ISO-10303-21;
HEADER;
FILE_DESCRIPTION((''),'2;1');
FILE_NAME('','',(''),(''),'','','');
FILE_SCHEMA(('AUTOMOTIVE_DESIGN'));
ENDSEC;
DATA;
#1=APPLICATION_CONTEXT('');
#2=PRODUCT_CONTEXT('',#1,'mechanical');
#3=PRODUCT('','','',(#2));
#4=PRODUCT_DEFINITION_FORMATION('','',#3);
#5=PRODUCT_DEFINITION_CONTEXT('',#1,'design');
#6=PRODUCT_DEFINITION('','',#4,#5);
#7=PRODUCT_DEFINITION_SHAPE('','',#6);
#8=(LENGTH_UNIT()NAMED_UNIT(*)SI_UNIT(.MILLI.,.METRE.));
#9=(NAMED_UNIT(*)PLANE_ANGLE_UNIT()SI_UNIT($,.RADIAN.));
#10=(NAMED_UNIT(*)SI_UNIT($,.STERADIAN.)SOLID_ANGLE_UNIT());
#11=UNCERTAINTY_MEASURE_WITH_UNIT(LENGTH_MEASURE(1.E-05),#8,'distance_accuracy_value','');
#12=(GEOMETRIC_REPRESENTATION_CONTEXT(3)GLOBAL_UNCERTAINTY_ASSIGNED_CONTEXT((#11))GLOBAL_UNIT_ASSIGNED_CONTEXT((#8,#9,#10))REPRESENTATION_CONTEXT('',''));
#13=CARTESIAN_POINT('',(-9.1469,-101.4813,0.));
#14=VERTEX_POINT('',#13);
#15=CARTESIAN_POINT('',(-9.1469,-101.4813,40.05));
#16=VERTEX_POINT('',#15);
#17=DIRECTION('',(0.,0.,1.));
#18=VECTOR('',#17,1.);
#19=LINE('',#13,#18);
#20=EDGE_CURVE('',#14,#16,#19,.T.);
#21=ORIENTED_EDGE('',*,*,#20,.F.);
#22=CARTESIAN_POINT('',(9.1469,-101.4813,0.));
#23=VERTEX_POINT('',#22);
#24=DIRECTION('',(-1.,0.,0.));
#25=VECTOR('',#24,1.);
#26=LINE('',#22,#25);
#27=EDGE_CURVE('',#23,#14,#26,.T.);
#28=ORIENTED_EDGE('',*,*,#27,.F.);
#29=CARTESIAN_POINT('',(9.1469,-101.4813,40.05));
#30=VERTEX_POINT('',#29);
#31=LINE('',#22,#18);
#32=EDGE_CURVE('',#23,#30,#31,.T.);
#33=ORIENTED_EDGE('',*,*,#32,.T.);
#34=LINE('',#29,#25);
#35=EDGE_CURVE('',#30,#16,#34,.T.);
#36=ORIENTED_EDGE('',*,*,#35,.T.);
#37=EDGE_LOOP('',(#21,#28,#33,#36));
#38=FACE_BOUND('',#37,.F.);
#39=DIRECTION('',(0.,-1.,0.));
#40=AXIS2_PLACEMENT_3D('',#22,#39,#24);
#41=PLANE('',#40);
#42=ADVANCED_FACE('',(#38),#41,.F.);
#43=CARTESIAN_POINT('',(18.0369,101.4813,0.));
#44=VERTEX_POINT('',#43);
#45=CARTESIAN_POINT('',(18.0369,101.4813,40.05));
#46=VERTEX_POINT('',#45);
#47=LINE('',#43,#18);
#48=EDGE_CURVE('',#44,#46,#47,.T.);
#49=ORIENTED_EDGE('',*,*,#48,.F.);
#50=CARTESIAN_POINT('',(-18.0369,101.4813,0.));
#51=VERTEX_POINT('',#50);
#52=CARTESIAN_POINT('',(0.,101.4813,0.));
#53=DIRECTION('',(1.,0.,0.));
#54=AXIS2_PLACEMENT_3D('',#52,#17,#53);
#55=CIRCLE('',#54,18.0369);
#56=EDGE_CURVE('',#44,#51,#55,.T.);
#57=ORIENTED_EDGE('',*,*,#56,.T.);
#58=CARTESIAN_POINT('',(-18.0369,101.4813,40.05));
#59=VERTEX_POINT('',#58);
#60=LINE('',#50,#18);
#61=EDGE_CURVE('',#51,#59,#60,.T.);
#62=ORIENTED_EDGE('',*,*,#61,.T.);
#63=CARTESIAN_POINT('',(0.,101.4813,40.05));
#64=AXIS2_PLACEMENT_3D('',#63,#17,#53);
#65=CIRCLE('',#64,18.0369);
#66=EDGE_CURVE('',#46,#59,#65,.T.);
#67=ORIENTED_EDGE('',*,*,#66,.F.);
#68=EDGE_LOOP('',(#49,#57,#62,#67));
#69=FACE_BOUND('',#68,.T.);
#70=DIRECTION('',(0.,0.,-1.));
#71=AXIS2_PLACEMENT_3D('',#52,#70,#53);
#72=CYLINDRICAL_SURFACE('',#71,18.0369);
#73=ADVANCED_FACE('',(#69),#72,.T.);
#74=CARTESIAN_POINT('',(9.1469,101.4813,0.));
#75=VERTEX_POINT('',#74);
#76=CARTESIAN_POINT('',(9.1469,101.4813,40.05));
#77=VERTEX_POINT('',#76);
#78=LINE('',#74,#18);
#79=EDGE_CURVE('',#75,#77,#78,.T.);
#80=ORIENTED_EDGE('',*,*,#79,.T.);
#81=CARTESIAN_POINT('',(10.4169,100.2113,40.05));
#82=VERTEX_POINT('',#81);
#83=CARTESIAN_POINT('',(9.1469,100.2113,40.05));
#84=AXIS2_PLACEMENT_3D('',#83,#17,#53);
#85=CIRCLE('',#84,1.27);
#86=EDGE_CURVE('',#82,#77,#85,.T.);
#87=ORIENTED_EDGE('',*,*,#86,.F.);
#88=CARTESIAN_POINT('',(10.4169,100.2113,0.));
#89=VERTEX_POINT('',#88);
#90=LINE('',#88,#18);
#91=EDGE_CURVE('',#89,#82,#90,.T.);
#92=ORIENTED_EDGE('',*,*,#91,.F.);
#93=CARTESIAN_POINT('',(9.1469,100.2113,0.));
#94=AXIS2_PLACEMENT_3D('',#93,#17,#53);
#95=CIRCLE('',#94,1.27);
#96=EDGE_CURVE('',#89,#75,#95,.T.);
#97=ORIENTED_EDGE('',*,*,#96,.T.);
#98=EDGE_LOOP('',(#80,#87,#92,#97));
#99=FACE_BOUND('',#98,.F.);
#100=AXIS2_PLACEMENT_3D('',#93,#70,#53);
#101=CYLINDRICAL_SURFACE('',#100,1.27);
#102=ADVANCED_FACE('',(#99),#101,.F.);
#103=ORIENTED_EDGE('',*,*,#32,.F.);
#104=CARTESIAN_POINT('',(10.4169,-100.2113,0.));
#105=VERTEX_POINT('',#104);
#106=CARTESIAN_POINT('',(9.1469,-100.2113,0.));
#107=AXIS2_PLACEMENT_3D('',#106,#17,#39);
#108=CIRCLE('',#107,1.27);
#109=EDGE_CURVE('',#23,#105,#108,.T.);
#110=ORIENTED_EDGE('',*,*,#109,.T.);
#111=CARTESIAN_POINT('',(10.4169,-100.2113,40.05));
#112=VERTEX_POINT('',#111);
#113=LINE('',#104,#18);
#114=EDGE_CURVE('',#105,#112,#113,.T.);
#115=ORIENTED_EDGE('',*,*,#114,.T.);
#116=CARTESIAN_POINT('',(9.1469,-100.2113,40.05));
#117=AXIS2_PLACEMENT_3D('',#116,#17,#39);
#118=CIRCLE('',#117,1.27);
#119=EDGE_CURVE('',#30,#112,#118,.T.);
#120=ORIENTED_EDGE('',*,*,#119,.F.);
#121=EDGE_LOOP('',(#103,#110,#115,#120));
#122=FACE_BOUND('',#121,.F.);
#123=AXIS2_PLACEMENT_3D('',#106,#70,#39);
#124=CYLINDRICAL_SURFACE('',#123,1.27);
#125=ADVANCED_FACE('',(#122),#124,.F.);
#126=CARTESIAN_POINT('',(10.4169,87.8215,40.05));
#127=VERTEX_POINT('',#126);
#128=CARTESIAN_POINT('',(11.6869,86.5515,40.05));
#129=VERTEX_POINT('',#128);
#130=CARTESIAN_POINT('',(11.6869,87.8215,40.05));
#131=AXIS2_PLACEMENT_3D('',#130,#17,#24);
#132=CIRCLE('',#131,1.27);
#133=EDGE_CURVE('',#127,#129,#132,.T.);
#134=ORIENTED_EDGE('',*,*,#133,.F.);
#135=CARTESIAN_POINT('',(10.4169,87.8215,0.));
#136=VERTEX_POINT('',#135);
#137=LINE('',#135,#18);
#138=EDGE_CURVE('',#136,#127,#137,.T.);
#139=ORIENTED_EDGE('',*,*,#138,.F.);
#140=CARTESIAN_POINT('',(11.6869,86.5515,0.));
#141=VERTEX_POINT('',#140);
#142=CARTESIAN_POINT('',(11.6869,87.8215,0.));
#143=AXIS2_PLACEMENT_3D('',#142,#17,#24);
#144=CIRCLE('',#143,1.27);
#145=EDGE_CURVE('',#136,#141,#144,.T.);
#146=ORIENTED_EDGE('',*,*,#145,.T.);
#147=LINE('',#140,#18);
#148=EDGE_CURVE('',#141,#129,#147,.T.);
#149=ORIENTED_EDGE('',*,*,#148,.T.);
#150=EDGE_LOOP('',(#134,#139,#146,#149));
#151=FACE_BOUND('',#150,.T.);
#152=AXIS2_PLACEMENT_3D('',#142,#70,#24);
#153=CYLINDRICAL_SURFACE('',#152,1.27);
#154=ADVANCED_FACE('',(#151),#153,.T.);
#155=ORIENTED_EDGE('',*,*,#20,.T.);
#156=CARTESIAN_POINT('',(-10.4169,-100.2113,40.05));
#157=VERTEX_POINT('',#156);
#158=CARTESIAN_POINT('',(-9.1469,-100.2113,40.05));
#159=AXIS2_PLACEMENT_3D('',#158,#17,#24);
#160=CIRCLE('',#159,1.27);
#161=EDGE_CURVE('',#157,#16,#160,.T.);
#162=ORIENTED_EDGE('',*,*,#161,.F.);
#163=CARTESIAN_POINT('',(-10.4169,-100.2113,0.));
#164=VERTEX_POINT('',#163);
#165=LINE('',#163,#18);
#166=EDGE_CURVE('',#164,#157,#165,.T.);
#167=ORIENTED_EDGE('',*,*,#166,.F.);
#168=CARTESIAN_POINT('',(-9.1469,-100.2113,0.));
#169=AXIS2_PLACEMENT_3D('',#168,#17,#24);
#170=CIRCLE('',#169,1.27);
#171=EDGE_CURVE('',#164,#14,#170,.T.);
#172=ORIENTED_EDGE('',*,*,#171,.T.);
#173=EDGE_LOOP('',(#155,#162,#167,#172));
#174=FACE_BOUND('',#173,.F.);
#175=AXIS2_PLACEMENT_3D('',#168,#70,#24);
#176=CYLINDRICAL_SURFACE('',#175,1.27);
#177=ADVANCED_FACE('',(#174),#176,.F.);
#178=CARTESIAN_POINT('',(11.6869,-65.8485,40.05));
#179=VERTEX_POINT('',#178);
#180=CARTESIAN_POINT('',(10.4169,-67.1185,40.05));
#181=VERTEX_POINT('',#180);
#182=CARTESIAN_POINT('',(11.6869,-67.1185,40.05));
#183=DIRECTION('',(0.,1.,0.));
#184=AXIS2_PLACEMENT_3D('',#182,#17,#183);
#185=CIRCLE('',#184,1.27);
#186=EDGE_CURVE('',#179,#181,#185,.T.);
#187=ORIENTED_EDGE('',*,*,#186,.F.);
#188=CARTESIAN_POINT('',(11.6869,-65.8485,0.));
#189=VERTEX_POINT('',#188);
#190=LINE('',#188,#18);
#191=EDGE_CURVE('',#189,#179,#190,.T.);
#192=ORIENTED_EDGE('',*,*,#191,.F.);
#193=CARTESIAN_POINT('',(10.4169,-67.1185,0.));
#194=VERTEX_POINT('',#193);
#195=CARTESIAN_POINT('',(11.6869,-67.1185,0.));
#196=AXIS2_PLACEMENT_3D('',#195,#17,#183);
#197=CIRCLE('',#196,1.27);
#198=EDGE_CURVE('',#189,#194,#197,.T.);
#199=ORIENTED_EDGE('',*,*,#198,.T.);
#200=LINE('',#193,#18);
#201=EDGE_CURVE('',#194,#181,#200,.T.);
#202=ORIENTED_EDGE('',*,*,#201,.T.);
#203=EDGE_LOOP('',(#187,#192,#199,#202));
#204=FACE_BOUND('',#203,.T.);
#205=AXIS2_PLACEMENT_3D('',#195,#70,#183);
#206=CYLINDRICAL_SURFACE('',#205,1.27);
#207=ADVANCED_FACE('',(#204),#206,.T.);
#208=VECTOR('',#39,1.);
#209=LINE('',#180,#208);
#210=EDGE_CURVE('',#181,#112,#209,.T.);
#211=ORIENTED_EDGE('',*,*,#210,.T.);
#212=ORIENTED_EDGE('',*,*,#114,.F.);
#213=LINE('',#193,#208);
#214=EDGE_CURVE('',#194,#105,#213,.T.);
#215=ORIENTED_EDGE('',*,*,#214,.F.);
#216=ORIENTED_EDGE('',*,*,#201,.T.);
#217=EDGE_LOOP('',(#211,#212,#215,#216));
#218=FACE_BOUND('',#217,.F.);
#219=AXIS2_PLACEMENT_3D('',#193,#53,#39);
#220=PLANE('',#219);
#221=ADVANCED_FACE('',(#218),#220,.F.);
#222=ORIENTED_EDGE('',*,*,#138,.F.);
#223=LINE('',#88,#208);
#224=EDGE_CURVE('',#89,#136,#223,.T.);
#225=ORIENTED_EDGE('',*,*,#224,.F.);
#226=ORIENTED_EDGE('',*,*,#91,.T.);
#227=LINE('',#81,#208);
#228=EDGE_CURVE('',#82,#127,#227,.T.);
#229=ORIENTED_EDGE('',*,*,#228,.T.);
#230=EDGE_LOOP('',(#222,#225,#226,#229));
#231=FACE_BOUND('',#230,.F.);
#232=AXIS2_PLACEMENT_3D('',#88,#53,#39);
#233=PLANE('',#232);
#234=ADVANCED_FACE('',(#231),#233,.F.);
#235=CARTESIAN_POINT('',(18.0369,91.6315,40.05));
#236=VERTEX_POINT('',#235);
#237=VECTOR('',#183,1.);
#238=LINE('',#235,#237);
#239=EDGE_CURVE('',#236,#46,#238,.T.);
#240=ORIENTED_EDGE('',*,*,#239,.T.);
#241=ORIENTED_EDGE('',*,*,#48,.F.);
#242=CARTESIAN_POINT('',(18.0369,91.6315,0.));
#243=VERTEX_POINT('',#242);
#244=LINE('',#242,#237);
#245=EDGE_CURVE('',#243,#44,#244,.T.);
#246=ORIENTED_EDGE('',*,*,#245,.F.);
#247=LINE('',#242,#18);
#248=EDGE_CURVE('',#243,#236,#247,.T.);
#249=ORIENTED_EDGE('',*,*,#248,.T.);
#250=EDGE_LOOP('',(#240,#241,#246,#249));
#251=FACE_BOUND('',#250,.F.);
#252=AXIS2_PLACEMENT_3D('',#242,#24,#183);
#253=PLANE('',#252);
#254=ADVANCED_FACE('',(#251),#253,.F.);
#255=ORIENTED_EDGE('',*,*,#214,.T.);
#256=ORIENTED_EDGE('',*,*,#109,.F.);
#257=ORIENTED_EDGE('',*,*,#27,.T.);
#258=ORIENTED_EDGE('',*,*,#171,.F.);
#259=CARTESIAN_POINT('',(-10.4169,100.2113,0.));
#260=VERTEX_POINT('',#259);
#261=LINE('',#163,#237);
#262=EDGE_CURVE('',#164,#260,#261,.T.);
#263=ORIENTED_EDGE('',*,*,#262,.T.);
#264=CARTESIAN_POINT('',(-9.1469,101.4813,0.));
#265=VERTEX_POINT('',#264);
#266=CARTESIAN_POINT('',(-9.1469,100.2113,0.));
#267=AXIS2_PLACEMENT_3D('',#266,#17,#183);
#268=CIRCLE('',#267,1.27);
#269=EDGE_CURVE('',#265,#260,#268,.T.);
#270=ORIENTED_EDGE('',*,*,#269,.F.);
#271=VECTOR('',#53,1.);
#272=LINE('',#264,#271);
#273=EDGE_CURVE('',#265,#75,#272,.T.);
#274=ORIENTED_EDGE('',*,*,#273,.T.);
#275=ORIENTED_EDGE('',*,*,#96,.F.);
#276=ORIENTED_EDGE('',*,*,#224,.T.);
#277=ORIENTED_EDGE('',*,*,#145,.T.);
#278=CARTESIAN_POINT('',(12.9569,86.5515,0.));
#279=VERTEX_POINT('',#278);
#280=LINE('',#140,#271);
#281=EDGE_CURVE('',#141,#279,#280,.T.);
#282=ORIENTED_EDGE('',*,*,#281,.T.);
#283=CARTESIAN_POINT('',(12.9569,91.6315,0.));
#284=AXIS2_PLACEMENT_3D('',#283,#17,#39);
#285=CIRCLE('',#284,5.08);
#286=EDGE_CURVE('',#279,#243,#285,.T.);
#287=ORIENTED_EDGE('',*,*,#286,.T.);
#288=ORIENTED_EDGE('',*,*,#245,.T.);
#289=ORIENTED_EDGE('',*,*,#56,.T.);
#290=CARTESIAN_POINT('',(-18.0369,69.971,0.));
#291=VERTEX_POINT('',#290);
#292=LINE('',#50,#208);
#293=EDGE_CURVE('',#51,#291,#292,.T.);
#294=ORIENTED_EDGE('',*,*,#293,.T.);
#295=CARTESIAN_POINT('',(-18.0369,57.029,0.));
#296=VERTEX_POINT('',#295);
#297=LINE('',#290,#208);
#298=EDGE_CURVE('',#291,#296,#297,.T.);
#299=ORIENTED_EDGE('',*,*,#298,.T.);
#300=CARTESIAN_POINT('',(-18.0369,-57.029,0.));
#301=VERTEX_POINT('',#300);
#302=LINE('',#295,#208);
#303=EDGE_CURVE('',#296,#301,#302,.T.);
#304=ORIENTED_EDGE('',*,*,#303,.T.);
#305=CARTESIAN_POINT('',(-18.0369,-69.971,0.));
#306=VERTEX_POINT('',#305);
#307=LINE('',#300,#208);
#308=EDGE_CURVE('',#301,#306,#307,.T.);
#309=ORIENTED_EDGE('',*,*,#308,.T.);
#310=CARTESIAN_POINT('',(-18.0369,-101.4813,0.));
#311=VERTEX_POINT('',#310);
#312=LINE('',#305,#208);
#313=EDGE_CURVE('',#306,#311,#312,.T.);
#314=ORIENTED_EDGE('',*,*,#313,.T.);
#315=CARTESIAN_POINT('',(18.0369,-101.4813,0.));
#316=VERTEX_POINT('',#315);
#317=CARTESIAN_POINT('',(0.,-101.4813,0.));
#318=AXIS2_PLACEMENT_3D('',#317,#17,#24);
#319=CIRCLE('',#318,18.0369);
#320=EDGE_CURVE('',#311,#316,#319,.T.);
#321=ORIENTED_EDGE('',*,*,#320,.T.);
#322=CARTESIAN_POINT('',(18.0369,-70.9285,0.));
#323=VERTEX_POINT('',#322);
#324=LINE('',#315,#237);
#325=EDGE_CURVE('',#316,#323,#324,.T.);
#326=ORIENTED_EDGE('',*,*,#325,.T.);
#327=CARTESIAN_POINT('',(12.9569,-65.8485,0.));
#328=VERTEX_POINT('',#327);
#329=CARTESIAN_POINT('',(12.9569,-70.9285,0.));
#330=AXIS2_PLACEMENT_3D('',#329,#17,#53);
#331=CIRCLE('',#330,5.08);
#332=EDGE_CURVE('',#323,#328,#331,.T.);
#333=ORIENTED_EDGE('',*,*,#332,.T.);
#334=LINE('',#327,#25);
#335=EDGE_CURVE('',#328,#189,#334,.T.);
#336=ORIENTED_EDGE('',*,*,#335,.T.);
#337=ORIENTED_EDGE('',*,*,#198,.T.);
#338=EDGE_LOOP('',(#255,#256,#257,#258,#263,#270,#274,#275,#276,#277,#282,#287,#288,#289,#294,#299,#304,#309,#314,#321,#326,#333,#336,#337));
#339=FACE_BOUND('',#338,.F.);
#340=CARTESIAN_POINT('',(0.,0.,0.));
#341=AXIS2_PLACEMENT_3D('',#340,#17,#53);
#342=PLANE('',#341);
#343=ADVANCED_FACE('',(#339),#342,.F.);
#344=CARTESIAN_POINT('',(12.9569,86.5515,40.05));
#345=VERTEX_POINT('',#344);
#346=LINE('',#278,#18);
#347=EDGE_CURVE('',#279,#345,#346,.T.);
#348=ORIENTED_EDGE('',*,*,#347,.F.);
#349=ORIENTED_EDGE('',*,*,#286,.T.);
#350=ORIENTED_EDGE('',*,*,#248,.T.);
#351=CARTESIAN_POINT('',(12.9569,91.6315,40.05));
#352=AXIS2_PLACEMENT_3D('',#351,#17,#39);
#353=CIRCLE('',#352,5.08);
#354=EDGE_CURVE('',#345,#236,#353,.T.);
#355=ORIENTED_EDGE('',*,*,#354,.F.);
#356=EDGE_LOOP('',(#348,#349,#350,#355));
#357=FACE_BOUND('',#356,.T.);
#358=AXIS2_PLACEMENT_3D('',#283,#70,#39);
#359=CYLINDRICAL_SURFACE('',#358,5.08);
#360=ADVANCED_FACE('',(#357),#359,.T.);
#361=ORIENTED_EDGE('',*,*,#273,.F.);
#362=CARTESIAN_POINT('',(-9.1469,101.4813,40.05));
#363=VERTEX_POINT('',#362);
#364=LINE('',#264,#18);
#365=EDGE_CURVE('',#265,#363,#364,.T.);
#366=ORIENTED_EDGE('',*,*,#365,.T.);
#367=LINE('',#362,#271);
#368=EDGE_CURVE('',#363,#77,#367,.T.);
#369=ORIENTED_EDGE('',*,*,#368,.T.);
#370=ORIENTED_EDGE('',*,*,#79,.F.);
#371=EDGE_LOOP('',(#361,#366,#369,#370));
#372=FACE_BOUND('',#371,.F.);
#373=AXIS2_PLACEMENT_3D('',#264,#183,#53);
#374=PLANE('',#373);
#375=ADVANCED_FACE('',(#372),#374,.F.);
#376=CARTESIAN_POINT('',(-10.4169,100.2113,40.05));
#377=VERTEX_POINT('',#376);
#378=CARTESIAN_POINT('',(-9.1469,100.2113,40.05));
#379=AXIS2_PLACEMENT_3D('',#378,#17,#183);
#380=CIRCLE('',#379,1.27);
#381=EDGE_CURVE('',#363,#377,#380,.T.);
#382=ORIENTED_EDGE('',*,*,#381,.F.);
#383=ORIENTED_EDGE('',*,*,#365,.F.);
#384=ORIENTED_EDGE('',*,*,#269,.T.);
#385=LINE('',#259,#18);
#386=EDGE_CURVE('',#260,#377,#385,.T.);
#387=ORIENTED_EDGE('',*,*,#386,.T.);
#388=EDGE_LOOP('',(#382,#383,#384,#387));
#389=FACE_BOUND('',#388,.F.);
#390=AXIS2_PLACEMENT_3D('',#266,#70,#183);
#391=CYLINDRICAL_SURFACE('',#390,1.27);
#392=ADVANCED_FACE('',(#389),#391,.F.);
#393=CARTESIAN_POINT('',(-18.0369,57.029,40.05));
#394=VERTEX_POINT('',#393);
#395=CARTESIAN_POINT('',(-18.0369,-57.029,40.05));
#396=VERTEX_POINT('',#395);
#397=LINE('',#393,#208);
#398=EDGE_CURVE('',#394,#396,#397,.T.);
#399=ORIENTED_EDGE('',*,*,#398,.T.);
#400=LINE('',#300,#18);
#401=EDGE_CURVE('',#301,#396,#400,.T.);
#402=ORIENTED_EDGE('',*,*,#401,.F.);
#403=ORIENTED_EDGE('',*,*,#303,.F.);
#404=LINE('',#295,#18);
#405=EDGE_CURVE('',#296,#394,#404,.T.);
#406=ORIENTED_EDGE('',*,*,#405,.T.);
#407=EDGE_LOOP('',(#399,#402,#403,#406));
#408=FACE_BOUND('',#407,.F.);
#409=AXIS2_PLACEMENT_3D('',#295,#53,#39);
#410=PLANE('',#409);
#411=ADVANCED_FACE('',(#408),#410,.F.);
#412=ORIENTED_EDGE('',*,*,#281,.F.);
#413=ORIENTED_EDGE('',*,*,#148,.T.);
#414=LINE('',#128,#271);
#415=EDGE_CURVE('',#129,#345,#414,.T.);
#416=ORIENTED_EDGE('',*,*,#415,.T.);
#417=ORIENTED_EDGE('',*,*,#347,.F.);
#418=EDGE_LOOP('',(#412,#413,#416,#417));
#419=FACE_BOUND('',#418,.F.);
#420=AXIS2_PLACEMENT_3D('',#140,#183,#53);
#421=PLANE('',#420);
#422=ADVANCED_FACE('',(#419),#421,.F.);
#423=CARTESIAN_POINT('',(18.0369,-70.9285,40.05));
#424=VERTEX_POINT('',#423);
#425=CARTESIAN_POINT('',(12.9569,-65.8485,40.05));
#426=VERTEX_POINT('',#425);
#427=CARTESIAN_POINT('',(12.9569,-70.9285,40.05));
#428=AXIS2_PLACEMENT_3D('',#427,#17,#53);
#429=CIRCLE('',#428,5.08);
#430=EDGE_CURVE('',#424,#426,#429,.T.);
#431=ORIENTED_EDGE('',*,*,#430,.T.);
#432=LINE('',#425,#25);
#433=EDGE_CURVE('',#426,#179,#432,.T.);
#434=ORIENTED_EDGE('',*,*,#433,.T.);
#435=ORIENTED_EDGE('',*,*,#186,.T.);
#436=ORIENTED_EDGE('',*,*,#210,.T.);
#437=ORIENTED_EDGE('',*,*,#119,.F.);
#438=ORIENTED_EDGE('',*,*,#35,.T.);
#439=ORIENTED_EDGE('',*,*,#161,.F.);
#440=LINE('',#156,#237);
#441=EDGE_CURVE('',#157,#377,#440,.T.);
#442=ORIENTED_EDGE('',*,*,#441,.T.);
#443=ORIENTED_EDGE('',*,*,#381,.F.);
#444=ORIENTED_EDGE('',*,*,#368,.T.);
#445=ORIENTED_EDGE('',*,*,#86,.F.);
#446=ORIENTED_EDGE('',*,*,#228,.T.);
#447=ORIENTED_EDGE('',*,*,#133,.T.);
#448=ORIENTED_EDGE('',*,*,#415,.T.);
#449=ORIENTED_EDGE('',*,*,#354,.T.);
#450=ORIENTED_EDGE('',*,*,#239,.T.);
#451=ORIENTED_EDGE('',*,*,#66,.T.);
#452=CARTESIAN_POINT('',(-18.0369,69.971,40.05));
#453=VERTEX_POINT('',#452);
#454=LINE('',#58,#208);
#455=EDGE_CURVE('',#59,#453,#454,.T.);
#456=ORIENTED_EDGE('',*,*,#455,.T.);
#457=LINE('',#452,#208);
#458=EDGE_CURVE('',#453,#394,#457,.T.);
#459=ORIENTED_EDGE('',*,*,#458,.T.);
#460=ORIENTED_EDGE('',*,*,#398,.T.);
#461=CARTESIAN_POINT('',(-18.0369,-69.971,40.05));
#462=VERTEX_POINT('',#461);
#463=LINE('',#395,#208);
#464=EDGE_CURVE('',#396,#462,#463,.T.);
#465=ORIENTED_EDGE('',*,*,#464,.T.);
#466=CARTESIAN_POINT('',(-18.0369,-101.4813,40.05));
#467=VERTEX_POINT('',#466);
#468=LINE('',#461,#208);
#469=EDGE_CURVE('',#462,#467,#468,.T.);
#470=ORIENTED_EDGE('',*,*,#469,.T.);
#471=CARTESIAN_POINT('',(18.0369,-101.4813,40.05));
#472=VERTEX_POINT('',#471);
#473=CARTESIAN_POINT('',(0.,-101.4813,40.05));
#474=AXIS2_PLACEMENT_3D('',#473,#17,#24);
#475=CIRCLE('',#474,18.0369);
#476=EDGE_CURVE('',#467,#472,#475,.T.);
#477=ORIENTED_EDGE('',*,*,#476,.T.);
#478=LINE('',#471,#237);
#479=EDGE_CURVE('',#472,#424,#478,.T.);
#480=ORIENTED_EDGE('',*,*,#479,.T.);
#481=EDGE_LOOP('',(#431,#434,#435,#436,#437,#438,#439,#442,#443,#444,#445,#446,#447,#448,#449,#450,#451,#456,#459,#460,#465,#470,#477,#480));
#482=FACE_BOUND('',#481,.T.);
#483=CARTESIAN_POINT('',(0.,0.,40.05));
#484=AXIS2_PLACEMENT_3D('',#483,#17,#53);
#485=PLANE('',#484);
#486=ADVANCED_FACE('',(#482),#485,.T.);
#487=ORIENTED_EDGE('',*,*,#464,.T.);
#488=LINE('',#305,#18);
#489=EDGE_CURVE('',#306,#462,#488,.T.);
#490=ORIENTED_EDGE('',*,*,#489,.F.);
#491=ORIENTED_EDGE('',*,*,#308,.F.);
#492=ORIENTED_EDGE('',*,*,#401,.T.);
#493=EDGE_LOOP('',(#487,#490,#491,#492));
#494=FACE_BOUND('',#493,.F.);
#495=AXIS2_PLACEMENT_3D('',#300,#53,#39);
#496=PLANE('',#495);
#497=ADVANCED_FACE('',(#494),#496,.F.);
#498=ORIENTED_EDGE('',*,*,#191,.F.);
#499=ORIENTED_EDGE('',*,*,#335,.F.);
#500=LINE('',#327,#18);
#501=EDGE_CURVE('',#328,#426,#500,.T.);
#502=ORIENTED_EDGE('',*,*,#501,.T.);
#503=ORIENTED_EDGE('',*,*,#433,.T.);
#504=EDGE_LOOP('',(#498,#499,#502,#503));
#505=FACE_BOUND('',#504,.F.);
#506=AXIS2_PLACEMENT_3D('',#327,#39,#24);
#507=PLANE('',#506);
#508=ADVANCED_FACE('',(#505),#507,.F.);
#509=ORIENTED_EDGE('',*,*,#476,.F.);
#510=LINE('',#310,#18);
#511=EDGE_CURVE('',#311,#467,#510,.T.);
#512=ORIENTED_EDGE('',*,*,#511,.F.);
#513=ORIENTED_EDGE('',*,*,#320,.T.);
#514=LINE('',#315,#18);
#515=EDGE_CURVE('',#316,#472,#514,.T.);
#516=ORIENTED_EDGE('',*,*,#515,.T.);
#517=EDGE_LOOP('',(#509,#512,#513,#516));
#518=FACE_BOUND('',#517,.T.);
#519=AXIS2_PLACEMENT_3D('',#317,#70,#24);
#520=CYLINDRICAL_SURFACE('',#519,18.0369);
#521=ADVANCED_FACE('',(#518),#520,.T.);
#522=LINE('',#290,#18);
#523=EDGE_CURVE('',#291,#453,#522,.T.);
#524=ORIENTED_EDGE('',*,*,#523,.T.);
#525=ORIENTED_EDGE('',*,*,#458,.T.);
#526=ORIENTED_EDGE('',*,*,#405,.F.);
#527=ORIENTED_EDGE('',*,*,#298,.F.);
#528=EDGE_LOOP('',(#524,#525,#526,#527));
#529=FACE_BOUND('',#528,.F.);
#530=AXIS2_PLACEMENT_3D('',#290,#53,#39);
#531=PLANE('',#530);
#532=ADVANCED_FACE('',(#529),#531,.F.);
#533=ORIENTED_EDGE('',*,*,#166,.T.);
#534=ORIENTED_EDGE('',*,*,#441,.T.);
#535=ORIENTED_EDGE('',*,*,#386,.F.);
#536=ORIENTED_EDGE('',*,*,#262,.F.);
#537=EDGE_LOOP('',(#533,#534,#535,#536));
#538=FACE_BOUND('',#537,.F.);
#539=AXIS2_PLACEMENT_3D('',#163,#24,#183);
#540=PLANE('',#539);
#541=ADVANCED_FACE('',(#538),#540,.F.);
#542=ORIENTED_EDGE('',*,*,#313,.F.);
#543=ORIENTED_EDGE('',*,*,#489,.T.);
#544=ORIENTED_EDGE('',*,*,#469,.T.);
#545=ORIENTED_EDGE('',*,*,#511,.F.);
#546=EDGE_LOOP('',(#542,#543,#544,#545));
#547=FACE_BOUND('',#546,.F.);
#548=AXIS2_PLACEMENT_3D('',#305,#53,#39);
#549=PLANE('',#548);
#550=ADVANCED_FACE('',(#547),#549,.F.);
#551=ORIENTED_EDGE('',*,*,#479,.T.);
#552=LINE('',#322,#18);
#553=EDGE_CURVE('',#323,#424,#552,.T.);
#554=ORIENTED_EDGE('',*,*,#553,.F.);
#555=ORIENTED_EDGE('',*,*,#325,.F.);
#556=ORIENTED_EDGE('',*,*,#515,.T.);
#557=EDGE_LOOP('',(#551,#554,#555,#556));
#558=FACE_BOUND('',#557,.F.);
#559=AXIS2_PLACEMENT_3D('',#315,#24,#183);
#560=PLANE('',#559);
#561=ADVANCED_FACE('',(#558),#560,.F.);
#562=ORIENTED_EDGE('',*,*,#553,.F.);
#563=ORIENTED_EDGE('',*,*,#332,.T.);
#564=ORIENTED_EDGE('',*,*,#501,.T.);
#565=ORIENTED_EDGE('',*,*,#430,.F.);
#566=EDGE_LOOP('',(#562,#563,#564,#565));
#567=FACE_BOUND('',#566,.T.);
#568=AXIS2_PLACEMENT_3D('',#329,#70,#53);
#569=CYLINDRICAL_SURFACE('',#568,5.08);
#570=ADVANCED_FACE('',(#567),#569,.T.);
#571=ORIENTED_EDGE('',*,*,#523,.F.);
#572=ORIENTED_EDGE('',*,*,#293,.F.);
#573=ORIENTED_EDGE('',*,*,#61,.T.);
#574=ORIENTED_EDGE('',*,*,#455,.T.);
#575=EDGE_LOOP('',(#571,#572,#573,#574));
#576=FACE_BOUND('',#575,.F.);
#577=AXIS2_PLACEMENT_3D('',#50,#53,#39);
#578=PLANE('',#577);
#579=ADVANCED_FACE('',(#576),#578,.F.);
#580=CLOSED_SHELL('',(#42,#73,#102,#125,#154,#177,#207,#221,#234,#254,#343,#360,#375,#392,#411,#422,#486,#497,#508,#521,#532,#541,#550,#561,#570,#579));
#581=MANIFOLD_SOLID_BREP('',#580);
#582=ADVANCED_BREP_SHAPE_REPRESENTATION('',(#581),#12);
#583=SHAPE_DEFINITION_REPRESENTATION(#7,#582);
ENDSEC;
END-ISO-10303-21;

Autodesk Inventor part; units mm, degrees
ref_plane "YZ Plane" through (0, 0, 0) normal (1, 0, 0) x (0, 1, 0)
ref_plane "XZ Plane" through (0, 0, 0) normal (0, 1, 0) x (-1, 0, 0)
ref_plane "XY Plane" through (0, 0, 0) normal (0, 0, 1) x (1, 0, 0)
ref_plane "Work Plane12" through (0, 0, 0) normal (0, 0, 1) x (1, 0, 0)
sketch "Sketch13" plane through (0, 0, 0) normal (0, 0, 1) x (1, 0, 0)
  line L0 (18.0369, 91.6315) -> (18.0369, 101.4813) projected
  arc A0 (12.9569, 86.5515) -> (18.0369, 91.6315) centre (12.9569, 91.6315) ccw projected
  arc A1 (10.4169, 87.8215) -> (11.6869, 86.5515) centre (11.6869, 87.8215) ccw projected
  line L1 (11.6869, 86.5515) -> (12.9569, 86.5515) projected
  line L2 (10.4169, 100.2113) -> (10.4169, 87.8215) projected
  arc A2 (18.0369, 101.4813) -> (-18.0369, 101.4813) centre (0, 101.4813) ccw projected
  arc A3 (10.4169, 100.2113) -> (9.1469, 101.4813) centre (9.1469, 100.2113) ccw projected
  line L3 (-9.1469, 101.4813) -> (9.1469, 101.4813) projected
  arc A4 (-9.1469, 101.4813) -> (-10.4169, 100.2113) centre (-9.1469, 100.2113) ccw projected
  line L4 (-10.4169, -100.2113) -> (-10.4169, 100.2113) projected
  line L5 (-18.0369, 101.4813) -> (-18.0369, 69.971) projected
  line L6 (-18.0369, 57.029) -> (-18.0369, -57.029) projected
  line L7 (-18.0369, -69.971) -> (-18.0369, -101.4813) projected
  arc A5 (-18.0369, -101.4813) -> (18.0369, -101.4813) centre (0, -101.4813) ccw projected
  line L8 (18.0369, -101.4813) -> (18.0369, -70.9285) projected
  arc A6 (18.0369, -70.9285) -> (12.9569, -65.8485) centre (12.9569, -70.9285) ccw projected
  line L9 (12.9569, -65.8485) -> (11.6869, -65.8485) projected
  arc A7 (11.6869, -65.8485) -> (10.4169, -67.1185) centre (11.6869, -67.1185) ccw projected
  line L10 (10.4169, -67.1185) -> (10.4169, -100.2113) projected
  arc A8 (9.1469, -101.4813) -> (10.4169, -100.2113) centre (9.1469, -100.2113) ccw projected
  line L11 (9.1469, -101.4813) -> (-9.1469, -101.4813) projected
  arc A9 (-10.4169, -100.2113) -> (-9.1469, -101.4813) centre (-9.1469, -100.2113) ccw projected
  line L12 (-18.0369, 69.971) -> (-18.0369, 57.029)
  line L13 (-18.0369, -57.029) -> (-18.0369, -69.971)
  line L14 (18.0369, 91.6315) -> (18.0369, -70.9285) construction
  point P0 (0, 0)
ref_plane "Work Plane4" through (-9.1469, 0, 0) normal (0, -1, 0) x (1, 0, 0)
sketch "Loft Sketch" plane through (-9.1469, 0, 0) normal (0, -1, 0) x (1, 0, 0)
  line L0 (27.1839, 65.45) -> (43.979, 160.7)
  line L1 (27.1839, 65.45) -> (27.1839, 40.05)
  point P0 (9.1469, 0)
  point P1 (27.1839, 0)
  point P2 (27.1839, 0)
  point P3 (27.1839, 0)
  dimension "d6" = 170
  dimension "d7" = 95.25
  dimension "d65" = 25.4
  dimension "d68" = 160.7
extrude "Extrusion6" add sketch "Sketch13" along normal up to surface (40.05 mm away)
sketch "Lower" plane through (0, 101.4813, 40.05) normal (0, 0, 1) x (1, 0, 0)
  line L0 (10.4169, -13.6598) -> (10.4169, -1.27) projected
  arc A0 (10.4169, -13.6598) -> (11.6869, -14.9298) centre (11.6869, -13.6598) ccw projected
  line L1 (12.9569, -14.9298) -> (11.6869, -14.9298) projected
  arc A1 (12.9569, -14.9298) -> (18.0369, -9.8498) centre (12.9569, -9.8498) ccw projected
  line L2 (18.0369, 0) -> (18.0369, -9.8498) projected
  arc A2 (18.0369, 0) -> (-18.0369, 0) centre (0, 0) ccw projected
  line L3 (-18.0369, -202.9627) -> (-18.0369, 0) projected
  arc A3 (-18.0369, -202.9627) -> (18.0369, -202.9627) centre (0, -202.9627) ccw projected
  line L4 (18.0369, -172.4098) -> (18.0369, -202.9627) projected
  arc A4 (18.0369, -172.4098) -> (12.9569, -167.3298) centre (12.9569, -172.4098) ccw projected
  line L5 (11.6869, -167.3298) -> (12.9569, -167.3298) projected
  arc A5 (11.6869, -167.3298) -> (10.4169, -168.5998) centre (11.6869, -168.5998) ccw projected
  line L6 (10.4169, -201.6927) -> (10.4169, -168.5998) projected
  arc A6 (9.1469, -202.9627) -> (10.4169, -201.6927) centre (9.1469, -201.6927) ccw projected
  line L7 (-9.1469, -202.9627) -> (9.1469, -202.9627) projected
  arc A7 (-10.4169, -201.6927) -> (-9.1469, -202.9627) centre (-9.1469, -201.6927) ccw projected
  line L8 (-10.4169, -1.27) -> (-10.4169, -201.6927) projected
  arc A8 (-9.1469, 0) -> (-10.4169, -1.27) centre (-9.1469, -1.27) ccw projected
  line L9 (9.1469, 0) -> (-9.1469, 0) projected
  arc A9 (10.4169, -1.27) -> (9.1469, 0) centre (9.1469, -1.27) ccw projected
  point P0 (0, -101.4813)
ref_plane "Mid Lof Plane" through (18.0369, 0, 65.45) normal (0, 0, 1) x (1, 0, 0)
sketch "Mid" plane through (18.0369, 0, 65.45) normal (0, 0, 1) x (1, 0, 0)
  line L0 (-7.62, 87.8215) -> (-7.62, 100.2113) projected
  arc A0 (-7.62, 87.8215) -> (-6.35, 86.5515) centre (-6.35, 87.8215) ccw projected
  line L1 (-5.08, 86.5515) -> (-6.35, 86.5515) projected
  arc A1 (-5.08, 86.5515) -> (0, 91.6315) centre (-5.08, 91.6315) ccw projected
  line L2 (0, 101.4813) -> (0, 91.6315) projected
  arc A2 (0, 101.4813) -> (-36.0739, 101.4813) centre (-18.0369, 101.4813) ccw projected
  line L3 (-36.0739, -101.4813) -> (-36.0739, 101.4813) projected
  arc A3 (-36.0739, -101.4813) -> (0, -101.4813) centre (-18.0369, -101.4813) ccw projected
  line L4 (0, -70.9285) -> (0, -101.4813) projected
  arc A4 (0, -70.9285) -> (-5.08, -65.8485) centre (-5.08, -70.9285) ccw projected
  line L5 (-6.35, -65.8485) -> (-5.08, -65.8485) projected
  arc A5 (-6.35, -65.8485) -> (-7.62, -67.1185) centre (-6.35, -67.1185) ccw projected
  line L6 (-7.62, -100.2113) -> (-7.62, -67.1185) projected
  arc A6 (-8.89, -101.4813) -> (-7.62, -100.2113) centre (-8.89, -100.2113) ccw projected
  line L7 (-27.1839, -101.4813) -> (-8.89, -101.4813) projected
  arc A7 (-28.4539, -100.2113) -> (-27.1839, -101.4813) centre (-27.1839, -100.2113) ccw projected
  line L8 (-28.4539, 100.2113) -> (-28.4539, -100.2113) projected
  arc A8 (-27.1839, 101.4813) -> (-28.4539, 100.2113) centre (-27.1839, 100.2113) ccw projected
  line L9 (-8.89, 101.4813) -> (-27.1839, 101.4813) projected
  arc A9 (-7.62, 100.2113) -> (-8.89, 101.4813) centre (-8.89, 100.2113) ccw projected
  point P0 (-18.0369, 0)
ref_plane "Work Plane5" through (34.8321, 0, 160.7) normal (0, 0, 1) x (1, 0, 0)
ref_plane "Work Plane7" through (0, 0, 0) normal (0, 0, 1) x (1, 0, 0)
sketch "Sketch6" plane through (34.8321, 0, 160.7) normal (0, 0, 1) x (1, 0, 0)
  line L0 (0, 92.3062) -> (0, 91.6315)
  line L1 (-62.0442, 92.3062) -> (-62.0442, 0)
  line L2 (-69.6642, 0) -> (-69.6642, 92.3062)
  line L3 (0, 91.6315) -> (0, 0) construction
  line L4 (-52.869, 0) -> (-45.249, 0) construction
  arc A0 (-34.8321, 119.5183) -> (-62.0442, 92.3062) centre (-34.8321, 92.3062) ccw
  arc A1 (-7.62, 92.3062) -> (-34.8321, 119.5183) centre (-34.8321, 92.3062) ccw
  line L5 (-7.62, 92.3062) -> (-7.62, 89.0915)
  arc A2 (-7.62, 89.0915) -> (-5.08, 86.5515) centre (-5.08, 89.0915) ccw
  line L6 (-5.08, 86.5515) -> (-5.08, 86.5515)
  arc A3 (-5.08, 86.5515) -> (0, 91.6315) centre (-5.08, 91.6315) ccw
  line L7 (-7.62, 90.6989) -> (0, 90.6989) construction
  line L8 (-69.6642, 0) -> (-62.0442, 0) construction
  arc A4 (0, 92.3062) -> (-69.6642, 92.3062) centre (-34.8321, 92.3062) ccw
  line L9 (0, 0) -> (-69.6642, 0) construction
  line L10 (0, -92.3062) -> (0, -70.9285)
  line L11 (-62.0442, -92.3062) -> (-62.0442, 0)
  line L12 (-69.6642, 0) -> (-69.6642, -92.3062)
  arc A5 (-62.0442, -92.3062) -> (-34.8321, -119.5183) centre (-34.8321, -92.3062) ccw
  arc A6 (-34.8321, -119.5183) -> (-7.62, -92.3062) centre (-34.8321, -92.3062) ccw
  line L13 (-7.62, -92.3062) -> (-7.62, -68.3885)
  arc A7 (-5.08, -65.8485) -> (-7.62, -68.3885) centre (-5.08, -68.3885) ccw
  line L14 (-5.08, -65.8485) -> (-5.08, -65.8485)
  arc A8 (0, -70.9285) -> (-5.08, -65.8485) centre (-5.08, -70.9285) ccw
  arc A9 (-69.6642, -92.3062) -> (0, -92.3062) centre (-34.8321, -92.3062) ccw
  arc A10 (-57.314, -56.6624) -> (-59.219, -57.7622) centre (-57.949, -57.7622) ccw construction
  line L15 (-59.219, -57.7622) -> (-59.219, -69.2378) construction
  arc A11 (-59.219, -69.2378) -> (-57.314, -70.3376) centre (-57.949, -69.2378) ccw construction
  line L16 (-57.314, -70.3376) -> (-54.774, -68.8712) construction
  arc A12 (-52.869, -69.971) -> (-54.774, -68.8712) centre (-54.139, -69.971) ccw construction
  line L17 (-52.869, -69.971) -> (-52.869, -101.4813) construction
  arc A13 (-52.869, -101.4813) -> (-16.7951, -101.4813) centre (-34.8321, -101.4813) ccw construction
  line L18 (-16.7951, -101.4813) -> (-16.7951, -70.9285) construction
  arc A14 (-16.7951, -70.9285) -> (-21.8751, -65.8485) centre (-21.8751, -70.9285) ccw construction
  line L19 (-21.8751, -65.8485) -> (-23.1451, -65.8485) construction
  arc A15 (-23.1451, -65.8485) -> (-24.4151, -67.1185) centre (-23.1451, -67.1185) ccw construction
  line L20 (-24.4151, -67.1185) -> (-24.4151, -100.2113) construction
  arc A16 (-25.6851, -101.4813) -> (-24.4151, -100.2113) centre (-25.6851, -100.2113) ccw construction
  line L21 (-25.6851, -101.4813) -> (-43.979, -101.4813) construction
  arc A17 (-45.249, -100.2113) -> (-43.979, -101.4813) centre (-43.979, -100.2113) ccw construction
  line L22 (-45.249, -100.2113) -> (-45.249, 100.2113) construction
  arc A18 (-43.979, 101.4813) -> (-45.249, 100.2113) centre (-43.979, 100.2113) ccw construction
  line L23 (-43.979, 101.4813) -> (-25.6851, 101.4813) construction
  arc A19 (-24.4151, 100.2113) -> (-25.6851, 101.4813) centre (-25.6851, 100.2113) ccw construction
  line L24 (-24.4151, 100.2113) -> (-24.4151, 87.8215) construction
  arc A20 (-24.4151, 87.8215) -> (-23.1451, 86.5515) centre (-23.1451, 87.8215) ccw construction
  line L25 (-23.1451, 86.5515) -> (-21.8751, 86.5515) construction
  arc A21 (-21.8751, 86.5515) -> (-16.7951, 91.6315) centre (-21.8751, 91.6315) ccw construction
  line L26 (-16.7951, 91.6315) -> (-16.7951, 101.4813) construction
  arc A22 (-16.7951, 101.4813) -> (-52.869, 101.4813) centre (-34.8321, 101.4813) ccw construction
  line L27 (-52.869, 101.4813) -> (-52.869, 69.971) construction
  arc A23 (-54.774, 68.8712) -> (-52.869, 69.971) centre (-54.139, 69.971) ccw construction
  line L28 (-54.774, 68.8712) -> (-57.314, 70.3376) construction
  arc A24 (-57.314, 70.3376) -> (-59.219, 69.2378) centre (-57.949, 69.2378) ccw construction
  line L29 (-59.219, 69.2378) -> (-59.219, 57.7622) construction
  arc A25 (-59.219, 57.7622) -> (-57.314, 56.6624) centre (-57.949, 57.7622) ccw construction
  line L30 (-57.314, 56.6624) -> (-54.774, 58.1288) construction
  arc A26 (-52.869, 57.029) -> (-54.774, 58.1288) centre (-54.139, 57.029) ccw construction
  line L31 (-52.869, 57.029) -> (-52.869, -57.029) construction
  arc A27 (-54.774, -58.1288) -> (-52.869, -57.029) centre (-54.139, -57.029) ccw construction
  line L32 (-54.774, -58.1288) -> (-57.314, -56.6624) construction
  line L33 (-42.4521, 102.7513) -> (-42.4521, 105.2913) construction
  arc A28 (-43.7221, 104.0213) -> (-42.4521, 105.2913) centre (-43.7221, 105.2913) ccw construction
  line L34 (-43.7221, 104.0213) -> (-47.5321, 104.0213) construction
  arc A29 (-48.8021, 105.2913) -> (-47.5321, 104.0213) centre (-47.5321, 105.2913) ccw construction
  line L35 (-48.8021, 105.2913) -> (-48.8021, 107.8313) construction
  arc A30 (-44.0396, 113.9797) -> (-48.8021, 107.8313) centre (-42.4521, 107.8313) ccw construction
  arc A31 (-42.4521, 112.75) -> (-44.0396, 113.9797) centre (-43.7221, 112.75) ccw construction
  line L36 (-42.4521, 112.75) -> (-42.4521, 109.1013) construction
  line L37 (-42.4521, 109.1013) -> (-27.2121, 109.1013) construction
  line L38 (-27.2121, 109.1013) -> (-27.2121, 112.75) construction
  arc A32 (-25.6246, 113.9797) -> (-27.2121, 112.75) centre (-25.9421, 112.75) ccw construction
  arc A33 (-20.8621, 107.8313) -> (-25.6246, 113.9797) centre (-27.2121, 107.8313) ccw construction
  line L39 (-20.8621, 107.8313) -> (-20.8621, 105.2913) construction
  arc A34 (-22.1321, 104.0213) -> (-20.8621, 105.2913) centre (-22.1321, 105.2913) ccw construction
  line L40 (-22.1321, 104.0213) -> (-25.9421, 104.0213) construction
  arc A35 (-27.2121, 105.2913) -> (-25.9421, 104.0213) centre (-25.9421, 105.2913) ccw construction
  line L41 (-27.2121, 105.2913) -> (-27.2121, 102.7513) construction
  line L42 (-27.2121, 102.7513) -> (-42.4521, 102.7513) construction
  line L43 (-27.2121, -109.1013) -> (-42.4521, -109.1013) construction
  line L44 (-42.4521, -109.1013) -> (-42.4521, -112.75) construction
  arc A36 (-44.0396, -113.9797) -> (-42.4521, -112.75) centre (-43.7221, -112.75) ccw construction
  arc A37 (-48.8021, -107.8313) -> (-44.0396, -113.9797) centre (-42.4521, -107.8313) ccw construction
  line L45 (-48.8021, -107.8313) -> (-48.8021, -105.2913) construction
  arc A38 (-47.5321, -104.0213) -> (-48.8021, -105.2913) centre (-47.5321, -105.2913) ccw construction
  line L46 (-47.5321, -104.0213) -> (-43.7221, -104.0213) construction
  arc A39 (-42.4521, -105.2913) -> (-43.7221, -104.0213) centre (-43.7221, -105.2913) ccw construction
  line L47 (-42.4521, -105.2913) -> (-42.4521, -102.7513) construction
  line L48 (-42.4521, -102.7513) -> (-27.2121, -102.7513) construction
  line L49 (-27.2121, -102.7513) -> (-27.2121, -105.2913) construction
  arc A40 (-25.9421, -104.0213) -> (-27.2121, -105.2913) centre (-25.9421, -105.2913) ccw construction
  line L50 (-25.9421, -104.0213) -> (-22.1321, -104.0213) construction
  arc A41 (-20.8621, -105.2913) -> (-22.1321, -104.0213) centre (-22.1321, -105.2913) ccw construction
  line L51 (-20.8621, -105.2913) -> (-20.8621, -107.8313) construction
  arc A42 (-25.6246, -113.9797) -> (-20.8621, -107.8313) centre (-27.2121, -107.8313) ccw construction
  arc A43 (-27.2121, -112.75) -> (-25.6246, -113.9797) centre (-25.9421, -112.75) ccw construction
  line L52 (-27.2121, -112.75) -> (-27.2121, -109.1013) construction
  line L53 (-24.4151, 94.0164) -> (-16.7951, 94.0164) construction
  line L54 (-45.249, 100.2113) -> (-52.869, 100.2113) construction
  line L55 (-62.0442, 92.3062) -> (-69.6642, 92.3062) construction
  line L56 (-57.949, -65.405) -> (-57.949, -61.595) projected
  arc A44 (-56.679, -60.325) -> (-57.949, -61.595) centre (-56.679, -61.595) ccw projected
  line L57 (-56.679, -60.325) -> (-55.409, -60.325) projected
  arc A45 (-54.139, -61.595) -> (-55.409, -60.325) centre (-55.409, -61.595) ccw projected
  line L58 (-54.139, -61.595) -> (-54.139, -65.405) projected
  arc A46 (-55.409, -66.675) -> (-54.139, -65.405) centre (-55.409, -65.405) ccw projected
  line L59 (-55.409, -66.675) -> (-56.679, -66.675) projected
  arc A47 (-57.949, -65.405) -> (-56.679, -66.675) centre (-56.679, -65.405) ccw projected
  line L60 (-57.949, 61.595) -> (-57.949, 65.405) projected
  arc A48 (-56.679, 66.675) -> (-57.949, 65.405) centre (-56.679, 65.405) ccw projected
  line L61 (-56.679, 66.675) -> (-55.409, 66.675) projected
  arc A49 (-54.139, 65.405) -> (-55.409, 66.675) centre (-55.409, 65.405) ccw projected
  line L62 (-54.139, 65.405) -> (-54.139, 61.595) projected
  arc A50 (-55.409, 60.325) -> (-54.139, 61.595) centre (-55.409, 61.595) ccw projected
  line L63 (-55.409, 60.325) -> (-56.679, 60.325) projected
  arc A51 (-57.949, 61.595) -> (-56.679, 60.325) centre (-56.679, 61.595) ccw projected
  point P0 (-34.8321, 0)
  point P1 (-34.8321, 127.1383)
  point P2 (-34.8321, -127.1383)
  dimension "d25" = 27.2121
  dimension "d26" = 27.2121
  dimension "d29" = 1.27
  dimension "d30" = 202.9627
  dimension "d31" = 9.1751
sketch "Sketch8" plane through (0, 101.4813, 0) normal (0, 0, -1) x (-1, 0, 0)
  arc A0 (19.9419, -170.3525) -> (18.0369, -171.4524) centre (19.3069, -171.4524) ccw projected
  line L0 (22.4819, -171.819) -> (19.9419, -170.3525) projected
  arc A1 (22.4819, -171.819) -> (24.3869, -170.7191) centre (23.1169, -170.7191) ccw projected
  line L1 (24.3869, -159.2435) -> (24.3869, -170.7191) projected
  arc A2 (24.3869, -159.2435) -> (22.4819, -158.1437) centre (23.1169, -159.2435) ccw projected
  line L2 (19.9419, -159.6102) -> (22.4819, -158.1437) projected
  arc A3 (18.0369, -158.5103) -> (19.9419, -159.6102) centre (19.3069, -158.5103) ccw projected
  line L3 (19.9419, -32.6102) -> (22.4819, -31.1437) projected
  arc A4 (18.0369, -31.5103) -> (19.9419, -32.6102) centre (19.3069, -31.5103) ccw projected
  arc A5 (24.3869, -32.2435) -> (22.4819, -31.1437) centre (23.1169, -32.2435) ccw projected
  line L4 (24.3869, -32.2435) -> (24.3869, -43.7191) projected
  arc A6 (19.9419, -43.3525) -> (18.0369, -44.4524) centre (19.3069, -44.4524) ccw projected
  line L5 (22.4819, -44.819) -> (19.9419, -43.3525) projected
  arc A7 (22.4819, -44.819) -> (24.3869, -43.7191) centre (23.1169, -43.7191) ccw projected
  line L6 (18.0369, -31.5103) -> (18.0369, -44.4524)
  line L7 (18.0369, 0) -> (18.0369, -202.9627) construction
  line L8 (18.0369, -171.4524) -> (18.0369, -158.5103)
  point P0 (0, -101.4813)
sketch "Sketch9" plane through (0, 101.4813, 0) normal (0, 0, -1) x (-1, 0, 0)
  line L0 (7.62, 7.62) -> (-7.62, 7.62) construction
  line L1 (7.62, 11.2687) -> (7.62, 7.62) construction
  arc A0 (9.2075, 12.4984) -> (7.62, 11.2687) centre (8.89, 11.2687) ccw construction
  arc A1 (13.97, 6.35) -> (9.2075, 12.4984) centre (7.62, 6.35) ccw construction
  line L2 (13.97, 3.81) -> (13.97, 6.35) construction
  arc A2 (12.7, 2.54) -> (13.97, 3.81) centre (12.7, 3.81) ccw construction
  line L3 (8.89, 2.54) -> (12.7, 2.54) construction
  line L4 (7.62, 1.27) -> (7.62, 3.81) construction
  line L5 (-7.62, 7.62) -> (-7.62, 11.2687) construction
  arc A3 (-7.62, 11.2687) -> (-9.2075, 12.4984) centre (-8.89, 11.2687) ccw construction
  arc A4 (-9.2075, 12.4984) -> (-13.97, 6.35) centre (-7.62, 6.35) ccw construction
  line L6 (-13.97, 6.35) -> (-13.97, 3.81) construction
  arc A5 (-13.97, 3.81) -> (-12.7, 2.54) centre (-12.7, 3.81) ccw construction
  line L7 (-12.7, 2.54) -> (-8.89, 2.54) construction
  line L8 (-7.62, 3.81) -> (-7.62, 1.27) construction
  line L9 (-7.62, 1.27) -> (7.62, 1.27) construction
  line L10 (-7.874, 2.286) -> (-12.7, 2.286)
  arc A6 (-14.224, 3.81) -> (-12.7, 2.286) centre (-12.7, 3.81) ccw
  line L11 (-14.224, 3.81) -> (-14.224, 6.35)
  arc A7 (-9.271, 12.7443) -> (-14.224, 6.35) centre (-7.62, 6.35) ccw
  arc A8 (-7.366, 11.2687) -> (-9.271, 12.7443) centre (-8.89, 11.2687) ccw
  line L12 (-7.366, 11.2687) -> (-7.366, 6.35)
  line L13 (7.366, 6.35) -> (7.366, 11.2687)
  arc A9 (9.271, 12.7443) -> (7.366, 11.2687) centre (8.89, 11.2687) ccw
  arc A10 (14.224, 6.35) -> (9.271, 12.7443) centre (7.62, 6.35) ccw
  line L14 (14.224, 6.35) -> (14.224, 3.81)
  arc A11 (12.7, 2.286) -> (14.224, 3.81) centre (12.7, 3.81) ccw
  line L15 (12.7, 2.286) -> (7.874, 2.286)
  line L16 (7.874, 2.286) -> (7.874, -0.254)
  line L17 (-7.874, -0.254) -> (-7.874, 2.286)
  line L18 (7.874, -0.254) -> (-7.874, -0.254)
  line L19 (9.1469, 0) -> (-9.1469, 0) construction
  line L20 (7.366, 6.35) -> (-7.366, 6.35)
  point P0 (0, -101.4813)
  dimension "d45" = 0.254
  dimension "d46" = 0.254
  dimension "d47" = 0.254
  dimension "d50" = 0.254
  dimension "d51" = 0.254
  dimension "d52" = 1.27
sketch "Sketch10" plane through (-7.366, 109.3553, 0) normal (-1, 0, 0) x (0, 0, 1)
  line L0 (-12.7, -1.016) -> (7.62, -1.524) construction
  line L1 (7.62, 1.016) -> (7.62, -1.524) construction
  line L2 (11.8332, -1.7226) -> (7.62, 1.016) construction
  line L3 (12.2002, -1.7226) -> (12.2002, -1.9766)
  line L4 (12.2002, -1.9766) -> (0, -1.9766)
  line L5 (0, -4.064) -> (0, -1.524) construction
  line L6 (12.2002, -1.7226) -> (7.42, 1.3845)
  line L7 (7.42, 1.3845) -> (7.42, -1.3189)
  line L8 (7.42, -1.3189) -> (0, 0.3094)
  line L9 (0, -1.9766) -> (0, 0.3094)
  point P0 (0, -109.3553)
  dimension "d53" = 0.254
  dimension "d57" = 0.2
  dimension "d58" = 2.286
  dimension "d59" = 0.2
sketch "Sketch11" plane through (0, 101.4813, 0) normal (0, 0, -1) x (-1, 0, 0)
  arc A0 (19.3069, -39.8863) -> (20.5769, -41.1563) centre (20.5769, -39.8863) ccw construction
  line L0 (19.3069, -39.8863) -> (19.3069, -36.0763) construction
  arc A1 (20.5769, -34.8063) -> (19.3069, -36.0763) centre (20.5769, -36.0763) ccw construction
  line L1 (20.5769, -34.8063) -> (21.8469, -34.8063) construction
  arc A2 (23.1169, -36.0763) -> (21.8469, -34.8063) centre (21.8469, -36.0763) ccw construction
  line L2 (23.1169, -36.0763) -> (23.1169, -39.8863) construction
  arc A3 (21.8469, -41.1563) -> (23.1169, -39.8863) centre (21.8469, -39.8863) ccw construction
  line L3 (21.8469, -41.1563) -> (20.5769, -41.1563) construction
  arc A4 (23.1169, -163.0763) -> (21.8469, -161.8063) centre (21.8469, -163.0763) ccw construction
  line L4 (23.1169, -163.0763) -> (23.1169, -166.8863) construction
  arc A5 (21.8469, -168.1563) -> (23.1169, -166.8863) centre (21.8469, -166.8863) ccw construction
  line L5 (21.8469, -168.1563) -> (20.5769, -168.1563) construction
  arc A6 (19.3069, -166.8863) -> (20.5769, -168.1563) centre (20.5769, -166.8863) ccw construction
  line L6 (19.3069, -166.8863) -> (19.3069, -163.0763) construction
  arc A7 (20.5769, -161.8063) -> (19.3069, -163.0763) centre (20.5769, -163.0763) ccw construction
  line L7 (20.5769, -161.8063) -> (21.8469, -161.8063) construction
  line L8 (19.1069, -36.0763) -> (19.1069, -39.8863)
  arc A8 (19.1069, -39.8863) -> (20.5769, -41.3563) centre (20.5769, -39.8863) ccw
  line L9 (20.5769, -41.3563) -> (21.8469, -41.3563)
  arc A9 (21.8469, -41.3563) -> (23.3169, -39.8863) centre (21.8469, -39.8863) ccw
  line L10 (23.3169, -39.8863) -> (23.3169, -36.0763)
  arc A10 (23.3169, -36.0763) -> (21.8469, -34.6063) centre (21.8469, -36.0763) ccw
  line L11 (21.8469, -34.6063) -> (20.5769, -34.6063)
  arc A11 (20.5769, -34.6063) -> (19.1069, -36.0763) centre (20.5769, -36.0763) ccw
  line L12 (19.1069, -163.0763) -> (19.1069, -166.8863)
  arc A12 (19.1069, -166.8863) -> (20.5769, -168.3563) centre (20.5769, -166.8863) ccw
  line L13 (20.5769, -168.3563) -> (21.8469, -168.3563)
  arc A13 (21.8469, -168.3563) -> (23.3169, -166.8863) centre (21.8469, -166.8863) ccw
  line L14 (23.3169, -166.8863) -> (23.3169, -163.0763)
  arc A14 (23.3169, -163.0763) -> (21.8469, -161.6063) centre (21.8469, -163.0763) ccw
  line L15 (21.8469, -161.6063) -> (20.5769, -161.6063)
  arc A15 (20.5769, -161.6063) -> (19.1069, -163.0763) centre (20.5769, -163.0763) ccw
  point P0 (0, -101.4813)
  dimension "d60" = 0.2
  dimension "d61" = 0.2
equation "\"d26\" = d25"
equation "\"d45\" = d50"
equation "\"d46\" = d50"
equation "\"d51\" = d50"
equation "\"d59\" = d57"
properties part number "Top Part"
